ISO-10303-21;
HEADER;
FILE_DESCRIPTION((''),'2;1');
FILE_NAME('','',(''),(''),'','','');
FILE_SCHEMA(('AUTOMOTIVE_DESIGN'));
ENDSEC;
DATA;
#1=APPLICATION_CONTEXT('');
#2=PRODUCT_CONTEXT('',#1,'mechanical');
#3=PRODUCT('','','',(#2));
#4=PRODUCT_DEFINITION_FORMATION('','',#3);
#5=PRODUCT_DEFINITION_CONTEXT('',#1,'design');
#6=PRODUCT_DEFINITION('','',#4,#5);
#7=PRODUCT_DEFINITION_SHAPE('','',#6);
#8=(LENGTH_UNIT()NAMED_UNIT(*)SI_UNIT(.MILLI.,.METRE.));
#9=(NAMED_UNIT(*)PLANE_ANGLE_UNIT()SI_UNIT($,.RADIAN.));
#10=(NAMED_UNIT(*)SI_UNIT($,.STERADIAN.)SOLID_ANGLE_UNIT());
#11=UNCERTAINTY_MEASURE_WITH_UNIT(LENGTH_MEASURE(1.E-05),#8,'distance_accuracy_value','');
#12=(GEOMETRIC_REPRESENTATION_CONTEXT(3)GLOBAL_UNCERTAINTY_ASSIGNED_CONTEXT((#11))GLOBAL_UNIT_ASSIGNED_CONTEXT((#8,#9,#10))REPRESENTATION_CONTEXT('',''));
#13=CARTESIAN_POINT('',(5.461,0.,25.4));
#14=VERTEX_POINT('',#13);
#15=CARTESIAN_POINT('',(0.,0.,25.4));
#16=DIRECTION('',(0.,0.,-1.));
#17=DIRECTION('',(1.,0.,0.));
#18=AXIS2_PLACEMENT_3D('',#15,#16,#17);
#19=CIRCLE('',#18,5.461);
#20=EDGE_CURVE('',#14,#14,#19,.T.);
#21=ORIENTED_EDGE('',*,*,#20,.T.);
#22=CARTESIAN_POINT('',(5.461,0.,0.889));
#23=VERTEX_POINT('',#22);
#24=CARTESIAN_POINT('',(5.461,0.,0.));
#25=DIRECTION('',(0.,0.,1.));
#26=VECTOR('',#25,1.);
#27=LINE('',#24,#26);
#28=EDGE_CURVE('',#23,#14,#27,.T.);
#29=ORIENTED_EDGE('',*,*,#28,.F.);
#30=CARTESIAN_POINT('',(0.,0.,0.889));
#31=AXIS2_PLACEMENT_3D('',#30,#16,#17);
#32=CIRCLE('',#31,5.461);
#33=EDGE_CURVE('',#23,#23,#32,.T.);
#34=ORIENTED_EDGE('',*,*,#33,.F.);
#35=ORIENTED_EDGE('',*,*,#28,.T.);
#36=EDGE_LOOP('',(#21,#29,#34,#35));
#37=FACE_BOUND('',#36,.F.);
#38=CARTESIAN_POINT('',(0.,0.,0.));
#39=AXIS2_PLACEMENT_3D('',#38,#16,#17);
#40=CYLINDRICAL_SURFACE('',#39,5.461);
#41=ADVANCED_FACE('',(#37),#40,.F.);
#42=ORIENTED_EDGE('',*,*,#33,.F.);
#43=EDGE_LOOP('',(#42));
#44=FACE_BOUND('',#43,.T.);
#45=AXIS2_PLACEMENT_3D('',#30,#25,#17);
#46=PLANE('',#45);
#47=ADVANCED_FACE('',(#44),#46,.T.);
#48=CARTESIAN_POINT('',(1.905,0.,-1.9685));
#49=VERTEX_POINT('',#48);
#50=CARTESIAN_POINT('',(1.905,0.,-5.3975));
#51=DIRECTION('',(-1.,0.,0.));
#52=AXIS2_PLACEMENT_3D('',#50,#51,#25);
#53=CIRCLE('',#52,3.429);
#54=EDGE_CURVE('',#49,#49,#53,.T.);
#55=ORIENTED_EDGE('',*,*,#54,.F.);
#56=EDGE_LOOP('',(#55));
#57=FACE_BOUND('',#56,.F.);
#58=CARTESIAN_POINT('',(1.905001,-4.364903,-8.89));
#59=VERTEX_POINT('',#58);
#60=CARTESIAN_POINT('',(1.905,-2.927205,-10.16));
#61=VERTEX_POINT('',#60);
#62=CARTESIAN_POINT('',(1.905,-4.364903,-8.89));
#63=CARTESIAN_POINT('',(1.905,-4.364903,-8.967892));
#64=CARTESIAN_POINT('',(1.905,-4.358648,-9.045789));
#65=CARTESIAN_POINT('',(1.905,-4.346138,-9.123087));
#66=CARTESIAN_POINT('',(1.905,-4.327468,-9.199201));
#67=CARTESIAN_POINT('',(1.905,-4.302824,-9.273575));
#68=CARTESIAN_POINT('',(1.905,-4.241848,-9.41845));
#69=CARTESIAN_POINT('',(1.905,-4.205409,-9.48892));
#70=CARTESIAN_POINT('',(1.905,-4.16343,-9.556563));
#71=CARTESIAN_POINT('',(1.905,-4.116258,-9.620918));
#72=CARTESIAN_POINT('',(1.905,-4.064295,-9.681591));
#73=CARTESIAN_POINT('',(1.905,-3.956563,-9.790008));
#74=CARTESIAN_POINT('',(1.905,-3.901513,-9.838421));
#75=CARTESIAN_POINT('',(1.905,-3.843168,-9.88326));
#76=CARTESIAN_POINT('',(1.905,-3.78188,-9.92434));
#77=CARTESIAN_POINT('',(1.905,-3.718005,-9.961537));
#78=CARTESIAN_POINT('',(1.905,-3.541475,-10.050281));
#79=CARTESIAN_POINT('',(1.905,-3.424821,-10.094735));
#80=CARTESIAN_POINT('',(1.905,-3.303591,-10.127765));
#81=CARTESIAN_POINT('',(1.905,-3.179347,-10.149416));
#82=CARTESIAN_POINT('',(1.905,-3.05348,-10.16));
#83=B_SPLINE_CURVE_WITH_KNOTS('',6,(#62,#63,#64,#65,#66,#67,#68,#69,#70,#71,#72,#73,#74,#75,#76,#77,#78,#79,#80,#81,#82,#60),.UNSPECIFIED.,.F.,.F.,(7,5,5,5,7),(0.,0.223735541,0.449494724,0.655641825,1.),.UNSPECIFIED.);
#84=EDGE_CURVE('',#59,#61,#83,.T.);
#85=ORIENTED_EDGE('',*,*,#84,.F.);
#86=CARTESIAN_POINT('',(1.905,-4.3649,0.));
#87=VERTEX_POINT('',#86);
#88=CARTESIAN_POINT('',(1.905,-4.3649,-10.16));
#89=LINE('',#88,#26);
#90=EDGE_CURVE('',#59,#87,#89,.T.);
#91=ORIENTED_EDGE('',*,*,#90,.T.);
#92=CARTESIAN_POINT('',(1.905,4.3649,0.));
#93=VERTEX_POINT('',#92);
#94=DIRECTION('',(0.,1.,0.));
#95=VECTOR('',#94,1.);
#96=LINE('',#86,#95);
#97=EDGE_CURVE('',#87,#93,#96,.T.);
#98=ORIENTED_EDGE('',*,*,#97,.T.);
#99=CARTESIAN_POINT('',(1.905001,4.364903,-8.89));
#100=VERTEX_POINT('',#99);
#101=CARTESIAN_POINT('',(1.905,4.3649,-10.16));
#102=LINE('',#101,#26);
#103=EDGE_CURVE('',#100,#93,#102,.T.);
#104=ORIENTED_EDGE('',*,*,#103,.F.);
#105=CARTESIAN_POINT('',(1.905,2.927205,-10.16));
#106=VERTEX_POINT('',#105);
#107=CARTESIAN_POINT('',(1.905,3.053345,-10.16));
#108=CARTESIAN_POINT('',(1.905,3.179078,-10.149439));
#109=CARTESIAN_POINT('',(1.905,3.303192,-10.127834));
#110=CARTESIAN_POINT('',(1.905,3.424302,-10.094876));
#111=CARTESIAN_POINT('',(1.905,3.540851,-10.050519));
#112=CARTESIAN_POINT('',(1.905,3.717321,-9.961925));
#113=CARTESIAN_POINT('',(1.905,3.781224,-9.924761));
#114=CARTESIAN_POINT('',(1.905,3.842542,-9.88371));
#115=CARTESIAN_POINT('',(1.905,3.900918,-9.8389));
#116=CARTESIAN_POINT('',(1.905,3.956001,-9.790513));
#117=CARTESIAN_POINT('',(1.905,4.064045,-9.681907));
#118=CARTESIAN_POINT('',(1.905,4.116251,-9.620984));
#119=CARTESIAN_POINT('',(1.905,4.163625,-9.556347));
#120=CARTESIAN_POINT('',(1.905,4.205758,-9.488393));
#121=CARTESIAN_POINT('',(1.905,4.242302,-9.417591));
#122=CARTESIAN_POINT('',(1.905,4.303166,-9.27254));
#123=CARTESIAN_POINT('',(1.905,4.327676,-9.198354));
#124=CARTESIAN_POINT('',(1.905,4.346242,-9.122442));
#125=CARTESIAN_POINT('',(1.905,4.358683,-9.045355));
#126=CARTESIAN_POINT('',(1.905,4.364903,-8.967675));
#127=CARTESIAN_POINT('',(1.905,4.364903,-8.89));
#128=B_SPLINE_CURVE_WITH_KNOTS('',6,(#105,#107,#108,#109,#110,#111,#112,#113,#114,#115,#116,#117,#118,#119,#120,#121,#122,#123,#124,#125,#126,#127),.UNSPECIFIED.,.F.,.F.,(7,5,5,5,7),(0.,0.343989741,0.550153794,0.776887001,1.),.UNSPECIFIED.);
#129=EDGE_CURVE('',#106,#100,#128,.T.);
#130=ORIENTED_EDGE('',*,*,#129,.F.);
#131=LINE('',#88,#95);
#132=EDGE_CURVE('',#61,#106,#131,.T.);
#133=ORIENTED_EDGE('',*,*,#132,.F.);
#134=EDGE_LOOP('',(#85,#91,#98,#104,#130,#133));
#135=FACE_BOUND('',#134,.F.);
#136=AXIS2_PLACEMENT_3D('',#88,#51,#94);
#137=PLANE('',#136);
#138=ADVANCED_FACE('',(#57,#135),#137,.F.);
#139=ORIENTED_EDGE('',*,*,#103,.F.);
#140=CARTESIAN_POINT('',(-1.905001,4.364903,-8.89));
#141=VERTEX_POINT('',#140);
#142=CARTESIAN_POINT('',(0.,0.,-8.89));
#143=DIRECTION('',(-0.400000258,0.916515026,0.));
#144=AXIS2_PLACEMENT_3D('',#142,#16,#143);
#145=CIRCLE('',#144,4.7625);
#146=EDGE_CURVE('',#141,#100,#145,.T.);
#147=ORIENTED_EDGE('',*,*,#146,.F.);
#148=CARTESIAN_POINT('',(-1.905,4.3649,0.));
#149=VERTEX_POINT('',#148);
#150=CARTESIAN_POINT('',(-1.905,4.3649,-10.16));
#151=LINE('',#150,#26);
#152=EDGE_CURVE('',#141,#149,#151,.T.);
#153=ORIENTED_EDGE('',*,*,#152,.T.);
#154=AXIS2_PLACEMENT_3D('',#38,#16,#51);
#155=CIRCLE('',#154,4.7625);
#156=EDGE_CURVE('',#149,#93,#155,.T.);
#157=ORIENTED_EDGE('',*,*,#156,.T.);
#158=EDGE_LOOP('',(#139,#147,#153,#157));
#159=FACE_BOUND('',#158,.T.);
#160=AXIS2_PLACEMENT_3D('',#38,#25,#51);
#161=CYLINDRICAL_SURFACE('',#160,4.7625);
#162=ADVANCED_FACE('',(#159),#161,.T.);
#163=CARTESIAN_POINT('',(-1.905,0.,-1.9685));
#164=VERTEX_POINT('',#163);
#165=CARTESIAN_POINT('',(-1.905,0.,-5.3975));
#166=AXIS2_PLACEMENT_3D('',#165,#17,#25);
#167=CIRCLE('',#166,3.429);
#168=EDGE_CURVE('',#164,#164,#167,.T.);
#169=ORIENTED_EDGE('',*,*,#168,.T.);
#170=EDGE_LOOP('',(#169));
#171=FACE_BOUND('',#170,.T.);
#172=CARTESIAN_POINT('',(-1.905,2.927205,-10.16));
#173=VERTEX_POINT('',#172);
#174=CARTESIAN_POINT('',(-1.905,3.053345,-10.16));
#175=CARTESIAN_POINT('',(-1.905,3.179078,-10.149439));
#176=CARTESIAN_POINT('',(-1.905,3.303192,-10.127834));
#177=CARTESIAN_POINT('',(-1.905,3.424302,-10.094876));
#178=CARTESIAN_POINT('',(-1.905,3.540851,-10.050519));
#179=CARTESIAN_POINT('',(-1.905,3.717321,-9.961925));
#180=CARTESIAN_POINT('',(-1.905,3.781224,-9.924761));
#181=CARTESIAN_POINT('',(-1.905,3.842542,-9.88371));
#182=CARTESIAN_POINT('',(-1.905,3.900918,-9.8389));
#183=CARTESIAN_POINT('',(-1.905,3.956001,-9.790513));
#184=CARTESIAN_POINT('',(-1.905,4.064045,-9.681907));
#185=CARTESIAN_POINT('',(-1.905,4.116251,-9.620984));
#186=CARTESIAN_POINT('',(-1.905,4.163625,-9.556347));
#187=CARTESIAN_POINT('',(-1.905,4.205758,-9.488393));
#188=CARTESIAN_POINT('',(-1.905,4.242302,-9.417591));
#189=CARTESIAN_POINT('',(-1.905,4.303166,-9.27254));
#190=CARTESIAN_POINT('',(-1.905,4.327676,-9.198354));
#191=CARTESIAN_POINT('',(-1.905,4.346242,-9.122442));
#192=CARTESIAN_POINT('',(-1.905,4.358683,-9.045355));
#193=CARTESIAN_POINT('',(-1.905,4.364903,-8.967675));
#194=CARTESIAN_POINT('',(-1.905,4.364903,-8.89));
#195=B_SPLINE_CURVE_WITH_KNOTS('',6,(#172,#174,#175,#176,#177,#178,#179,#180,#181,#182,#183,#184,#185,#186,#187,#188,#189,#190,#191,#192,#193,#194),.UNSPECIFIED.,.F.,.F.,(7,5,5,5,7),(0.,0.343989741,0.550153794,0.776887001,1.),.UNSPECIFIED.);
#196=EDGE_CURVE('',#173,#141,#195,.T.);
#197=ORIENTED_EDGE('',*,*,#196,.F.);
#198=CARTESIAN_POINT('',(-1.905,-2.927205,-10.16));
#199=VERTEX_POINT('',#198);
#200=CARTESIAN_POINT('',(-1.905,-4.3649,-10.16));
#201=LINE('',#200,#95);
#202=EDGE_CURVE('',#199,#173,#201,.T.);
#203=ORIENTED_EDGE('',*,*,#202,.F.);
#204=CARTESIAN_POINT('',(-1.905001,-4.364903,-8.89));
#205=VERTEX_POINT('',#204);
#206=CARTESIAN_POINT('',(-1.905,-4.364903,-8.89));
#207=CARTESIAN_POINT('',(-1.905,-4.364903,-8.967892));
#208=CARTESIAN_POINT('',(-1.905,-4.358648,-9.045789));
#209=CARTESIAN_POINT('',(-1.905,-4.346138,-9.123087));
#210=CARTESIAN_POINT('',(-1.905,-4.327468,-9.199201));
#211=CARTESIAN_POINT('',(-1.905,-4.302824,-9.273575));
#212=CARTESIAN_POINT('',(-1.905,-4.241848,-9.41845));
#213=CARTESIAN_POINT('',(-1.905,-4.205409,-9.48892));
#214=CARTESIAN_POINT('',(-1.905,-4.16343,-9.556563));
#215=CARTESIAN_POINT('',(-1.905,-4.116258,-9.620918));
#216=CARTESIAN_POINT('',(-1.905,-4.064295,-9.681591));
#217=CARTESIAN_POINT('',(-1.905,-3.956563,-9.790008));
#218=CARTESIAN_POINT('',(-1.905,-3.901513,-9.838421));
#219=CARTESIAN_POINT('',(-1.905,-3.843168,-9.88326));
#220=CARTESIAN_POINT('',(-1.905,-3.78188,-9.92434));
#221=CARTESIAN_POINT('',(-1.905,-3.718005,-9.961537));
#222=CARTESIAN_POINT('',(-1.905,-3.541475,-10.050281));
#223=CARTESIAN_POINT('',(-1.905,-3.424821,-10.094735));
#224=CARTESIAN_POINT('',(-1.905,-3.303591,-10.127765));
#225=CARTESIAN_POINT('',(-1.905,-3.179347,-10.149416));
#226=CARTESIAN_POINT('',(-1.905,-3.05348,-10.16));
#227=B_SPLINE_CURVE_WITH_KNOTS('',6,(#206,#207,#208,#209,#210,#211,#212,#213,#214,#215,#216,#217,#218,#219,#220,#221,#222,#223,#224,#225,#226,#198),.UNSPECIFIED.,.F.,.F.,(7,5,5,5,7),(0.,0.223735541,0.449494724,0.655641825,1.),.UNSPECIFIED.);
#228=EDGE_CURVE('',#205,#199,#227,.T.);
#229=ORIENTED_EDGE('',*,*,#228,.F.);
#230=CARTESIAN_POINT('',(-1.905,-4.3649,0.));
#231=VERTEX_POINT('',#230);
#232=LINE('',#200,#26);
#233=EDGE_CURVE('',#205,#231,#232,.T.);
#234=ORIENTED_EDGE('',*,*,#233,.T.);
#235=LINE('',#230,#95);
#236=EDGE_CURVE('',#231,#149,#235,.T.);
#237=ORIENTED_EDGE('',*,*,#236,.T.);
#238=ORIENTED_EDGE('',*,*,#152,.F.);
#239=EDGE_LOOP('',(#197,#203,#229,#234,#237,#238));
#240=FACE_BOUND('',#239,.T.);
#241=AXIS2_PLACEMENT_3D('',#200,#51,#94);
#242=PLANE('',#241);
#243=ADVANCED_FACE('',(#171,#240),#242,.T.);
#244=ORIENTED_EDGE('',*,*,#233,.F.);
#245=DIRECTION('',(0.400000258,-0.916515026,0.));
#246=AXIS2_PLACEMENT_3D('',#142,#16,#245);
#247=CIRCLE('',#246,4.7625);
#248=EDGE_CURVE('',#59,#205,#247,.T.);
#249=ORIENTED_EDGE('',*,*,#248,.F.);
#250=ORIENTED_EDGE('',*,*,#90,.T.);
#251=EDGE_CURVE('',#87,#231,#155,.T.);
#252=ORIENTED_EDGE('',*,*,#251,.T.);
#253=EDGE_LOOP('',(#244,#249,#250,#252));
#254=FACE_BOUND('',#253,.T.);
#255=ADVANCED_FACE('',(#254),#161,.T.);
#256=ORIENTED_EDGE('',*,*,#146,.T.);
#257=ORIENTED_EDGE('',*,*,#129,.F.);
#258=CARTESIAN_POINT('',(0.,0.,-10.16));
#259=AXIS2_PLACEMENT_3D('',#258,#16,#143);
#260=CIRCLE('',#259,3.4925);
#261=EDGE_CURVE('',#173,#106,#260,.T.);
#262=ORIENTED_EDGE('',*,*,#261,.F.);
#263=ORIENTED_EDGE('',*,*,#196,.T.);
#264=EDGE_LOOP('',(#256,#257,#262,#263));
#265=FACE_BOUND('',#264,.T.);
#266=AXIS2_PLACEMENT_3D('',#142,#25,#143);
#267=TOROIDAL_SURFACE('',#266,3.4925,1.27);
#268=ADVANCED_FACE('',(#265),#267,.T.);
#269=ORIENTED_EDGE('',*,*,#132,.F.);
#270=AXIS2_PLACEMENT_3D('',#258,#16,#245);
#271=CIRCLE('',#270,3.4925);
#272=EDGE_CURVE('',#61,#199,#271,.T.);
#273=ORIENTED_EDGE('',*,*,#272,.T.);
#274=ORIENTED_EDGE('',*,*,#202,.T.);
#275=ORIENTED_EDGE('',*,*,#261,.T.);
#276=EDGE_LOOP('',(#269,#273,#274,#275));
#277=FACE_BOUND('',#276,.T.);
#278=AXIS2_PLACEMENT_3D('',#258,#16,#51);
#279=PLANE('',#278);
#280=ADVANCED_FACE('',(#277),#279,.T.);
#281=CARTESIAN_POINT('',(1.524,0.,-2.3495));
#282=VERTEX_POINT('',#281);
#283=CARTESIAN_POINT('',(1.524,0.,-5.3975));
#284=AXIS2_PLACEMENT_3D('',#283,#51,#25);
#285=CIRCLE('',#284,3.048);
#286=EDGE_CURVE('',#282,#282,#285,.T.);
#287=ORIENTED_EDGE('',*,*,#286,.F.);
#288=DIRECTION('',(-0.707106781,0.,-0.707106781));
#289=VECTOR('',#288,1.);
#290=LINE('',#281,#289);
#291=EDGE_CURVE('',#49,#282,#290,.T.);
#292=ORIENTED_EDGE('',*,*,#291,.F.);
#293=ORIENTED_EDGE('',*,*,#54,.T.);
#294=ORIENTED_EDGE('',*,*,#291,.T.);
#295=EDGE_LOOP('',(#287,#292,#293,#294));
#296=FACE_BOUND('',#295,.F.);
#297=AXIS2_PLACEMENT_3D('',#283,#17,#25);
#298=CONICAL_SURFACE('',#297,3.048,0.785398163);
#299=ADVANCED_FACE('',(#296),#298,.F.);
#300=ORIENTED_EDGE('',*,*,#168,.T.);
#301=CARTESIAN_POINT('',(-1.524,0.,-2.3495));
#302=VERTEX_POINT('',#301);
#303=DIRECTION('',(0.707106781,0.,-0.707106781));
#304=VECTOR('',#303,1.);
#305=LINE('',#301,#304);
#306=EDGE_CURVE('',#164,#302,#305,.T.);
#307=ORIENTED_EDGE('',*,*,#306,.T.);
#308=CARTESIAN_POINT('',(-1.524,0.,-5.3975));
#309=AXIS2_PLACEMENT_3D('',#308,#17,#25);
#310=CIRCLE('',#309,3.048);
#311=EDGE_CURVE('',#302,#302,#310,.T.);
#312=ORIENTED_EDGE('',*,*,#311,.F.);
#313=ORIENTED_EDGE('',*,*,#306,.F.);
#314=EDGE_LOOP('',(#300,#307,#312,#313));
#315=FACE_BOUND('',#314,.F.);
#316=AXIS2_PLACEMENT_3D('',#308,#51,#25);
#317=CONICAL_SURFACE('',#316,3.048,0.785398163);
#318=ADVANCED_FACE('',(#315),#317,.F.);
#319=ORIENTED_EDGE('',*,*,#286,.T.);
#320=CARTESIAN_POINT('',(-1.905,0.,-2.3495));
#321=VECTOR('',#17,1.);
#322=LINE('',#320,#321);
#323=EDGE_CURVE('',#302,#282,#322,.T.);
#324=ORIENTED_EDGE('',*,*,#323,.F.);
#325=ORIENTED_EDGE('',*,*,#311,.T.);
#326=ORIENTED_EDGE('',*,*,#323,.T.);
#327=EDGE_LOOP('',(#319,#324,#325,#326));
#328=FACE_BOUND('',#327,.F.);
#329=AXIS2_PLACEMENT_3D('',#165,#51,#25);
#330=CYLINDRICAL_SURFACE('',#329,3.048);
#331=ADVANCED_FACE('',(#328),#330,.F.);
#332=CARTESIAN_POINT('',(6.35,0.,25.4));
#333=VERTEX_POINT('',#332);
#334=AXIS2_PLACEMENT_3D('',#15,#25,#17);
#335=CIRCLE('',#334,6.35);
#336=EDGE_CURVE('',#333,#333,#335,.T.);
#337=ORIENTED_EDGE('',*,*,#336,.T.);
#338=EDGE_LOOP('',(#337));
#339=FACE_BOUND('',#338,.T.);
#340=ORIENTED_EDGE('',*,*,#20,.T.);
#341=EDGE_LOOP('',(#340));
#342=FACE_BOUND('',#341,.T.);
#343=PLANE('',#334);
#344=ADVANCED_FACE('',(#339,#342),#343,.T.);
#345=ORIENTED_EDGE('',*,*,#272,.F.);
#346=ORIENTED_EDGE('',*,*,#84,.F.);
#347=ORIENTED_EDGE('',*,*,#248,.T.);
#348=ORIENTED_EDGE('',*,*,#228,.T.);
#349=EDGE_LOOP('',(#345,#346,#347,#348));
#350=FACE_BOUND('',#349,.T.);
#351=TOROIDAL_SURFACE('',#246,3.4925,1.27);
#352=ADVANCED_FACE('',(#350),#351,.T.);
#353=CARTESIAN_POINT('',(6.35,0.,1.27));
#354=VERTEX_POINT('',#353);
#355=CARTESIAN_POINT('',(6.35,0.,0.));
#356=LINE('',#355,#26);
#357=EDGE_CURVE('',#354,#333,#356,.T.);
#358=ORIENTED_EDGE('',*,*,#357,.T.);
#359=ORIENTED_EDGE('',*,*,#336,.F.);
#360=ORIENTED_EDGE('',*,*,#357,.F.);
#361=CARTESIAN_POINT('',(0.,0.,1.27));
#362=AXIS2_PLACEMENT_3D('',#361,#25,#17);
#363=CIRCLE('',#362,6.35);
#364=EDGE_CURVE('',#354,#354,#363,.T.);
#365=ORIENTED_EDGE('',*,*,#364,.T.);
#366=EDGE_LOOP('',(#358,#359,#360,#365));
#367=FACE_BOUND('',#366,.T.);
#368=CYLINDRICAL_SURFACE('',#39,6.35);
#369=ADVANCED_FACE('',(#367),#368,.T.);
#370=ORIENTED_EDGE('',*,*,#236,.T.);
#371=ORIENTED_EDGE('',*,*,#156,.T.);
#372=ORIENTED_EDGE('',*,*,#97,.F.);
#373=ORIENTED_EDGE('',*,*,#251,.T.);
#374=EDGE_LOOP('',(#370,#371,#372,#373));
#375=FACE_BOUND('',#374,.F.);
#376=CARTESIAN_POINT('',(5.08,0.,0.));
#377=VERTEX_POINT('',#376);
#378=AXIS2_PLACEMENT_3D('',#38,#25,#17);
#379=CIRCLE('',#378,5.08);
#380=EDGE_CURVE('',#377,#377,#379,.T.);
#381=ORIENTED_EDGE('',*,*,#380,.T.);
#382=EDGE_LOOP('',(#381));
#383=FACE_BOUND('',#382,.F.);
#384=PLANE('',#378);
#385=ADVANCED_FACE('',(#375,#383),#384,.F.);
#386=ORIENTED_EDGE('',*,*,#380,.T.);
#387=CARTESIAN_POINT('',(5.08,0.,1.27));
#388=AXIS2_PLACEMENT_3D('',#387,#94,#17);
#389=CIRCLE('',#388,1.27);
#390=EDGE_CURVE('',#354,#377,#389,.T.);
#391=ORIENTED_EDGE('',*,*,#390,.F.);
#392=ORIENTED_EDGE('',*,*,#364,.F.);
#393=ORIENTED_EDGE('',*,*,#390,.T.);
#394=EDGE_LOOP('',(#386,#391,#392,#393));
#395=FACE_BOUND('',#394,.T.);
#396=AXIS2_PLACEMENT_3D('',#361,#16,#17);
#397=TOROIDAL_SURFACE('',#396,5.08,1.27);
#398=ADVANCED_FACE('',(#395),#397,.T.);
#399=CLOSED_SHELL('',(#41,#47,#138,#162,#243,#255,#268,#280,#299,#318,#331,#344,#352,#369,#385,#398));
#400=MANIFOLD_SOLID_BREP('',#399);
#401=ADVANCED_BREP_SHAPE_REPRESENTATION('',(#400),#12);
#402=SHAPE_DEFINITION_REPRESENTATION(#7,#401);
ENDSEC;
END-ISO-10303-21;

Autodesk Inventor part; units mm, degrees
ref_plane "YZ Plane" through (0, 0, 0) normal (1, 0, 0) x (0, 1, 0)
ref_plane "XZ Plane" through (0, 0, 0) normal (0, 1, 0) x (-1, 0, 0)
ref_plane "XY Plane" through (0, 0, 0) normal (0, 0, 1) x (1, 0, 0)
sketch "Sketch1" plane through (0, 0, 0) normal (0, 0, 1) x (1, 0, 0)
  circle A0 centre (0, 0) radius 6.35
  dimension "d0" = 12.7
extrude "Extrusion1" add sketch "Sketch1" along normal blind 25.4
shell "Shell1" thickness 0.889 removed faces 1 at (-1.8127, -0.4771, 25.4)
fillet "Fillet1" radius 1.27 1 edges at (-6.35, 0, 0)
sketch "Sketch2" plane through (0, 0, 0) normal (0, 0, -1) x (-1, 0, 0)
  circle A0 centre (0, 0) radius 4.7625
  dimension "d5" = 9.525
extrude "Extrusion2" add sketch "Sketch2" along normal blind 10.16
sketch "Sketch3" plane through (0, 0, -10.16) normal (0, 0, -1) x (-1, 0, 0)
  circle A0 centre (0, 0) radius 4.7625 projected
  line L0 (1.905, -4.3649) -> (1.905, 4.3649)
  line L1 (-1.905, -4.3649) -> (-1.905, 4.3649)
  line L2 (0, -8.89) -> (0, 8.89) projected
  circle A1 centre (0, 0) radius 4.7625 construction
  dimension "d8" = 3.81
extrude "Extrusion3" cut sketch "Sketch3" against normal up to surface (10.16 mm away) contours A0 L0 | L1 A0
sketch "Sketch4" plane through (-1.905, -4.3649, -10.16) normal (-1, 0, 0) x (0, 0, 1)
  line L0 (-7.112, 4.3649) -> (42.672, 4.3649) projected
  circle A0 centre (4.7625, 4.3649) radius 3.048
  line L1 (0, 0) -> (0, 8.7298) projected
  point P0 (10.16, 4.3649)
  dimension "d11" = 6.096
  dimension "d12" = 4.7625
extrude "Extrusion4" cut sketch "Sketch4" against normal through all
chamfer "Chamfer1" distance 0.381 angle 45 2 edges at (-1.905, 0, -8.4455) (1.905, 0, -8.4455)
fillet "Fillet2" radius 1.27 2 edges at (0, -4.7625, -10.16) (0, 4.7625, -10.16)
thread "Thread1" size "1/2-20 UNF" class "1A" standard "ANSI Unified Screw Threads" length 26 offset 5.08
thread "Thread2" size "7/16-28 UNEF" class "2B" standard "ANSI Unified Screw Threads" length 26 offset 14.605
properties part number "SA Shock Body"
